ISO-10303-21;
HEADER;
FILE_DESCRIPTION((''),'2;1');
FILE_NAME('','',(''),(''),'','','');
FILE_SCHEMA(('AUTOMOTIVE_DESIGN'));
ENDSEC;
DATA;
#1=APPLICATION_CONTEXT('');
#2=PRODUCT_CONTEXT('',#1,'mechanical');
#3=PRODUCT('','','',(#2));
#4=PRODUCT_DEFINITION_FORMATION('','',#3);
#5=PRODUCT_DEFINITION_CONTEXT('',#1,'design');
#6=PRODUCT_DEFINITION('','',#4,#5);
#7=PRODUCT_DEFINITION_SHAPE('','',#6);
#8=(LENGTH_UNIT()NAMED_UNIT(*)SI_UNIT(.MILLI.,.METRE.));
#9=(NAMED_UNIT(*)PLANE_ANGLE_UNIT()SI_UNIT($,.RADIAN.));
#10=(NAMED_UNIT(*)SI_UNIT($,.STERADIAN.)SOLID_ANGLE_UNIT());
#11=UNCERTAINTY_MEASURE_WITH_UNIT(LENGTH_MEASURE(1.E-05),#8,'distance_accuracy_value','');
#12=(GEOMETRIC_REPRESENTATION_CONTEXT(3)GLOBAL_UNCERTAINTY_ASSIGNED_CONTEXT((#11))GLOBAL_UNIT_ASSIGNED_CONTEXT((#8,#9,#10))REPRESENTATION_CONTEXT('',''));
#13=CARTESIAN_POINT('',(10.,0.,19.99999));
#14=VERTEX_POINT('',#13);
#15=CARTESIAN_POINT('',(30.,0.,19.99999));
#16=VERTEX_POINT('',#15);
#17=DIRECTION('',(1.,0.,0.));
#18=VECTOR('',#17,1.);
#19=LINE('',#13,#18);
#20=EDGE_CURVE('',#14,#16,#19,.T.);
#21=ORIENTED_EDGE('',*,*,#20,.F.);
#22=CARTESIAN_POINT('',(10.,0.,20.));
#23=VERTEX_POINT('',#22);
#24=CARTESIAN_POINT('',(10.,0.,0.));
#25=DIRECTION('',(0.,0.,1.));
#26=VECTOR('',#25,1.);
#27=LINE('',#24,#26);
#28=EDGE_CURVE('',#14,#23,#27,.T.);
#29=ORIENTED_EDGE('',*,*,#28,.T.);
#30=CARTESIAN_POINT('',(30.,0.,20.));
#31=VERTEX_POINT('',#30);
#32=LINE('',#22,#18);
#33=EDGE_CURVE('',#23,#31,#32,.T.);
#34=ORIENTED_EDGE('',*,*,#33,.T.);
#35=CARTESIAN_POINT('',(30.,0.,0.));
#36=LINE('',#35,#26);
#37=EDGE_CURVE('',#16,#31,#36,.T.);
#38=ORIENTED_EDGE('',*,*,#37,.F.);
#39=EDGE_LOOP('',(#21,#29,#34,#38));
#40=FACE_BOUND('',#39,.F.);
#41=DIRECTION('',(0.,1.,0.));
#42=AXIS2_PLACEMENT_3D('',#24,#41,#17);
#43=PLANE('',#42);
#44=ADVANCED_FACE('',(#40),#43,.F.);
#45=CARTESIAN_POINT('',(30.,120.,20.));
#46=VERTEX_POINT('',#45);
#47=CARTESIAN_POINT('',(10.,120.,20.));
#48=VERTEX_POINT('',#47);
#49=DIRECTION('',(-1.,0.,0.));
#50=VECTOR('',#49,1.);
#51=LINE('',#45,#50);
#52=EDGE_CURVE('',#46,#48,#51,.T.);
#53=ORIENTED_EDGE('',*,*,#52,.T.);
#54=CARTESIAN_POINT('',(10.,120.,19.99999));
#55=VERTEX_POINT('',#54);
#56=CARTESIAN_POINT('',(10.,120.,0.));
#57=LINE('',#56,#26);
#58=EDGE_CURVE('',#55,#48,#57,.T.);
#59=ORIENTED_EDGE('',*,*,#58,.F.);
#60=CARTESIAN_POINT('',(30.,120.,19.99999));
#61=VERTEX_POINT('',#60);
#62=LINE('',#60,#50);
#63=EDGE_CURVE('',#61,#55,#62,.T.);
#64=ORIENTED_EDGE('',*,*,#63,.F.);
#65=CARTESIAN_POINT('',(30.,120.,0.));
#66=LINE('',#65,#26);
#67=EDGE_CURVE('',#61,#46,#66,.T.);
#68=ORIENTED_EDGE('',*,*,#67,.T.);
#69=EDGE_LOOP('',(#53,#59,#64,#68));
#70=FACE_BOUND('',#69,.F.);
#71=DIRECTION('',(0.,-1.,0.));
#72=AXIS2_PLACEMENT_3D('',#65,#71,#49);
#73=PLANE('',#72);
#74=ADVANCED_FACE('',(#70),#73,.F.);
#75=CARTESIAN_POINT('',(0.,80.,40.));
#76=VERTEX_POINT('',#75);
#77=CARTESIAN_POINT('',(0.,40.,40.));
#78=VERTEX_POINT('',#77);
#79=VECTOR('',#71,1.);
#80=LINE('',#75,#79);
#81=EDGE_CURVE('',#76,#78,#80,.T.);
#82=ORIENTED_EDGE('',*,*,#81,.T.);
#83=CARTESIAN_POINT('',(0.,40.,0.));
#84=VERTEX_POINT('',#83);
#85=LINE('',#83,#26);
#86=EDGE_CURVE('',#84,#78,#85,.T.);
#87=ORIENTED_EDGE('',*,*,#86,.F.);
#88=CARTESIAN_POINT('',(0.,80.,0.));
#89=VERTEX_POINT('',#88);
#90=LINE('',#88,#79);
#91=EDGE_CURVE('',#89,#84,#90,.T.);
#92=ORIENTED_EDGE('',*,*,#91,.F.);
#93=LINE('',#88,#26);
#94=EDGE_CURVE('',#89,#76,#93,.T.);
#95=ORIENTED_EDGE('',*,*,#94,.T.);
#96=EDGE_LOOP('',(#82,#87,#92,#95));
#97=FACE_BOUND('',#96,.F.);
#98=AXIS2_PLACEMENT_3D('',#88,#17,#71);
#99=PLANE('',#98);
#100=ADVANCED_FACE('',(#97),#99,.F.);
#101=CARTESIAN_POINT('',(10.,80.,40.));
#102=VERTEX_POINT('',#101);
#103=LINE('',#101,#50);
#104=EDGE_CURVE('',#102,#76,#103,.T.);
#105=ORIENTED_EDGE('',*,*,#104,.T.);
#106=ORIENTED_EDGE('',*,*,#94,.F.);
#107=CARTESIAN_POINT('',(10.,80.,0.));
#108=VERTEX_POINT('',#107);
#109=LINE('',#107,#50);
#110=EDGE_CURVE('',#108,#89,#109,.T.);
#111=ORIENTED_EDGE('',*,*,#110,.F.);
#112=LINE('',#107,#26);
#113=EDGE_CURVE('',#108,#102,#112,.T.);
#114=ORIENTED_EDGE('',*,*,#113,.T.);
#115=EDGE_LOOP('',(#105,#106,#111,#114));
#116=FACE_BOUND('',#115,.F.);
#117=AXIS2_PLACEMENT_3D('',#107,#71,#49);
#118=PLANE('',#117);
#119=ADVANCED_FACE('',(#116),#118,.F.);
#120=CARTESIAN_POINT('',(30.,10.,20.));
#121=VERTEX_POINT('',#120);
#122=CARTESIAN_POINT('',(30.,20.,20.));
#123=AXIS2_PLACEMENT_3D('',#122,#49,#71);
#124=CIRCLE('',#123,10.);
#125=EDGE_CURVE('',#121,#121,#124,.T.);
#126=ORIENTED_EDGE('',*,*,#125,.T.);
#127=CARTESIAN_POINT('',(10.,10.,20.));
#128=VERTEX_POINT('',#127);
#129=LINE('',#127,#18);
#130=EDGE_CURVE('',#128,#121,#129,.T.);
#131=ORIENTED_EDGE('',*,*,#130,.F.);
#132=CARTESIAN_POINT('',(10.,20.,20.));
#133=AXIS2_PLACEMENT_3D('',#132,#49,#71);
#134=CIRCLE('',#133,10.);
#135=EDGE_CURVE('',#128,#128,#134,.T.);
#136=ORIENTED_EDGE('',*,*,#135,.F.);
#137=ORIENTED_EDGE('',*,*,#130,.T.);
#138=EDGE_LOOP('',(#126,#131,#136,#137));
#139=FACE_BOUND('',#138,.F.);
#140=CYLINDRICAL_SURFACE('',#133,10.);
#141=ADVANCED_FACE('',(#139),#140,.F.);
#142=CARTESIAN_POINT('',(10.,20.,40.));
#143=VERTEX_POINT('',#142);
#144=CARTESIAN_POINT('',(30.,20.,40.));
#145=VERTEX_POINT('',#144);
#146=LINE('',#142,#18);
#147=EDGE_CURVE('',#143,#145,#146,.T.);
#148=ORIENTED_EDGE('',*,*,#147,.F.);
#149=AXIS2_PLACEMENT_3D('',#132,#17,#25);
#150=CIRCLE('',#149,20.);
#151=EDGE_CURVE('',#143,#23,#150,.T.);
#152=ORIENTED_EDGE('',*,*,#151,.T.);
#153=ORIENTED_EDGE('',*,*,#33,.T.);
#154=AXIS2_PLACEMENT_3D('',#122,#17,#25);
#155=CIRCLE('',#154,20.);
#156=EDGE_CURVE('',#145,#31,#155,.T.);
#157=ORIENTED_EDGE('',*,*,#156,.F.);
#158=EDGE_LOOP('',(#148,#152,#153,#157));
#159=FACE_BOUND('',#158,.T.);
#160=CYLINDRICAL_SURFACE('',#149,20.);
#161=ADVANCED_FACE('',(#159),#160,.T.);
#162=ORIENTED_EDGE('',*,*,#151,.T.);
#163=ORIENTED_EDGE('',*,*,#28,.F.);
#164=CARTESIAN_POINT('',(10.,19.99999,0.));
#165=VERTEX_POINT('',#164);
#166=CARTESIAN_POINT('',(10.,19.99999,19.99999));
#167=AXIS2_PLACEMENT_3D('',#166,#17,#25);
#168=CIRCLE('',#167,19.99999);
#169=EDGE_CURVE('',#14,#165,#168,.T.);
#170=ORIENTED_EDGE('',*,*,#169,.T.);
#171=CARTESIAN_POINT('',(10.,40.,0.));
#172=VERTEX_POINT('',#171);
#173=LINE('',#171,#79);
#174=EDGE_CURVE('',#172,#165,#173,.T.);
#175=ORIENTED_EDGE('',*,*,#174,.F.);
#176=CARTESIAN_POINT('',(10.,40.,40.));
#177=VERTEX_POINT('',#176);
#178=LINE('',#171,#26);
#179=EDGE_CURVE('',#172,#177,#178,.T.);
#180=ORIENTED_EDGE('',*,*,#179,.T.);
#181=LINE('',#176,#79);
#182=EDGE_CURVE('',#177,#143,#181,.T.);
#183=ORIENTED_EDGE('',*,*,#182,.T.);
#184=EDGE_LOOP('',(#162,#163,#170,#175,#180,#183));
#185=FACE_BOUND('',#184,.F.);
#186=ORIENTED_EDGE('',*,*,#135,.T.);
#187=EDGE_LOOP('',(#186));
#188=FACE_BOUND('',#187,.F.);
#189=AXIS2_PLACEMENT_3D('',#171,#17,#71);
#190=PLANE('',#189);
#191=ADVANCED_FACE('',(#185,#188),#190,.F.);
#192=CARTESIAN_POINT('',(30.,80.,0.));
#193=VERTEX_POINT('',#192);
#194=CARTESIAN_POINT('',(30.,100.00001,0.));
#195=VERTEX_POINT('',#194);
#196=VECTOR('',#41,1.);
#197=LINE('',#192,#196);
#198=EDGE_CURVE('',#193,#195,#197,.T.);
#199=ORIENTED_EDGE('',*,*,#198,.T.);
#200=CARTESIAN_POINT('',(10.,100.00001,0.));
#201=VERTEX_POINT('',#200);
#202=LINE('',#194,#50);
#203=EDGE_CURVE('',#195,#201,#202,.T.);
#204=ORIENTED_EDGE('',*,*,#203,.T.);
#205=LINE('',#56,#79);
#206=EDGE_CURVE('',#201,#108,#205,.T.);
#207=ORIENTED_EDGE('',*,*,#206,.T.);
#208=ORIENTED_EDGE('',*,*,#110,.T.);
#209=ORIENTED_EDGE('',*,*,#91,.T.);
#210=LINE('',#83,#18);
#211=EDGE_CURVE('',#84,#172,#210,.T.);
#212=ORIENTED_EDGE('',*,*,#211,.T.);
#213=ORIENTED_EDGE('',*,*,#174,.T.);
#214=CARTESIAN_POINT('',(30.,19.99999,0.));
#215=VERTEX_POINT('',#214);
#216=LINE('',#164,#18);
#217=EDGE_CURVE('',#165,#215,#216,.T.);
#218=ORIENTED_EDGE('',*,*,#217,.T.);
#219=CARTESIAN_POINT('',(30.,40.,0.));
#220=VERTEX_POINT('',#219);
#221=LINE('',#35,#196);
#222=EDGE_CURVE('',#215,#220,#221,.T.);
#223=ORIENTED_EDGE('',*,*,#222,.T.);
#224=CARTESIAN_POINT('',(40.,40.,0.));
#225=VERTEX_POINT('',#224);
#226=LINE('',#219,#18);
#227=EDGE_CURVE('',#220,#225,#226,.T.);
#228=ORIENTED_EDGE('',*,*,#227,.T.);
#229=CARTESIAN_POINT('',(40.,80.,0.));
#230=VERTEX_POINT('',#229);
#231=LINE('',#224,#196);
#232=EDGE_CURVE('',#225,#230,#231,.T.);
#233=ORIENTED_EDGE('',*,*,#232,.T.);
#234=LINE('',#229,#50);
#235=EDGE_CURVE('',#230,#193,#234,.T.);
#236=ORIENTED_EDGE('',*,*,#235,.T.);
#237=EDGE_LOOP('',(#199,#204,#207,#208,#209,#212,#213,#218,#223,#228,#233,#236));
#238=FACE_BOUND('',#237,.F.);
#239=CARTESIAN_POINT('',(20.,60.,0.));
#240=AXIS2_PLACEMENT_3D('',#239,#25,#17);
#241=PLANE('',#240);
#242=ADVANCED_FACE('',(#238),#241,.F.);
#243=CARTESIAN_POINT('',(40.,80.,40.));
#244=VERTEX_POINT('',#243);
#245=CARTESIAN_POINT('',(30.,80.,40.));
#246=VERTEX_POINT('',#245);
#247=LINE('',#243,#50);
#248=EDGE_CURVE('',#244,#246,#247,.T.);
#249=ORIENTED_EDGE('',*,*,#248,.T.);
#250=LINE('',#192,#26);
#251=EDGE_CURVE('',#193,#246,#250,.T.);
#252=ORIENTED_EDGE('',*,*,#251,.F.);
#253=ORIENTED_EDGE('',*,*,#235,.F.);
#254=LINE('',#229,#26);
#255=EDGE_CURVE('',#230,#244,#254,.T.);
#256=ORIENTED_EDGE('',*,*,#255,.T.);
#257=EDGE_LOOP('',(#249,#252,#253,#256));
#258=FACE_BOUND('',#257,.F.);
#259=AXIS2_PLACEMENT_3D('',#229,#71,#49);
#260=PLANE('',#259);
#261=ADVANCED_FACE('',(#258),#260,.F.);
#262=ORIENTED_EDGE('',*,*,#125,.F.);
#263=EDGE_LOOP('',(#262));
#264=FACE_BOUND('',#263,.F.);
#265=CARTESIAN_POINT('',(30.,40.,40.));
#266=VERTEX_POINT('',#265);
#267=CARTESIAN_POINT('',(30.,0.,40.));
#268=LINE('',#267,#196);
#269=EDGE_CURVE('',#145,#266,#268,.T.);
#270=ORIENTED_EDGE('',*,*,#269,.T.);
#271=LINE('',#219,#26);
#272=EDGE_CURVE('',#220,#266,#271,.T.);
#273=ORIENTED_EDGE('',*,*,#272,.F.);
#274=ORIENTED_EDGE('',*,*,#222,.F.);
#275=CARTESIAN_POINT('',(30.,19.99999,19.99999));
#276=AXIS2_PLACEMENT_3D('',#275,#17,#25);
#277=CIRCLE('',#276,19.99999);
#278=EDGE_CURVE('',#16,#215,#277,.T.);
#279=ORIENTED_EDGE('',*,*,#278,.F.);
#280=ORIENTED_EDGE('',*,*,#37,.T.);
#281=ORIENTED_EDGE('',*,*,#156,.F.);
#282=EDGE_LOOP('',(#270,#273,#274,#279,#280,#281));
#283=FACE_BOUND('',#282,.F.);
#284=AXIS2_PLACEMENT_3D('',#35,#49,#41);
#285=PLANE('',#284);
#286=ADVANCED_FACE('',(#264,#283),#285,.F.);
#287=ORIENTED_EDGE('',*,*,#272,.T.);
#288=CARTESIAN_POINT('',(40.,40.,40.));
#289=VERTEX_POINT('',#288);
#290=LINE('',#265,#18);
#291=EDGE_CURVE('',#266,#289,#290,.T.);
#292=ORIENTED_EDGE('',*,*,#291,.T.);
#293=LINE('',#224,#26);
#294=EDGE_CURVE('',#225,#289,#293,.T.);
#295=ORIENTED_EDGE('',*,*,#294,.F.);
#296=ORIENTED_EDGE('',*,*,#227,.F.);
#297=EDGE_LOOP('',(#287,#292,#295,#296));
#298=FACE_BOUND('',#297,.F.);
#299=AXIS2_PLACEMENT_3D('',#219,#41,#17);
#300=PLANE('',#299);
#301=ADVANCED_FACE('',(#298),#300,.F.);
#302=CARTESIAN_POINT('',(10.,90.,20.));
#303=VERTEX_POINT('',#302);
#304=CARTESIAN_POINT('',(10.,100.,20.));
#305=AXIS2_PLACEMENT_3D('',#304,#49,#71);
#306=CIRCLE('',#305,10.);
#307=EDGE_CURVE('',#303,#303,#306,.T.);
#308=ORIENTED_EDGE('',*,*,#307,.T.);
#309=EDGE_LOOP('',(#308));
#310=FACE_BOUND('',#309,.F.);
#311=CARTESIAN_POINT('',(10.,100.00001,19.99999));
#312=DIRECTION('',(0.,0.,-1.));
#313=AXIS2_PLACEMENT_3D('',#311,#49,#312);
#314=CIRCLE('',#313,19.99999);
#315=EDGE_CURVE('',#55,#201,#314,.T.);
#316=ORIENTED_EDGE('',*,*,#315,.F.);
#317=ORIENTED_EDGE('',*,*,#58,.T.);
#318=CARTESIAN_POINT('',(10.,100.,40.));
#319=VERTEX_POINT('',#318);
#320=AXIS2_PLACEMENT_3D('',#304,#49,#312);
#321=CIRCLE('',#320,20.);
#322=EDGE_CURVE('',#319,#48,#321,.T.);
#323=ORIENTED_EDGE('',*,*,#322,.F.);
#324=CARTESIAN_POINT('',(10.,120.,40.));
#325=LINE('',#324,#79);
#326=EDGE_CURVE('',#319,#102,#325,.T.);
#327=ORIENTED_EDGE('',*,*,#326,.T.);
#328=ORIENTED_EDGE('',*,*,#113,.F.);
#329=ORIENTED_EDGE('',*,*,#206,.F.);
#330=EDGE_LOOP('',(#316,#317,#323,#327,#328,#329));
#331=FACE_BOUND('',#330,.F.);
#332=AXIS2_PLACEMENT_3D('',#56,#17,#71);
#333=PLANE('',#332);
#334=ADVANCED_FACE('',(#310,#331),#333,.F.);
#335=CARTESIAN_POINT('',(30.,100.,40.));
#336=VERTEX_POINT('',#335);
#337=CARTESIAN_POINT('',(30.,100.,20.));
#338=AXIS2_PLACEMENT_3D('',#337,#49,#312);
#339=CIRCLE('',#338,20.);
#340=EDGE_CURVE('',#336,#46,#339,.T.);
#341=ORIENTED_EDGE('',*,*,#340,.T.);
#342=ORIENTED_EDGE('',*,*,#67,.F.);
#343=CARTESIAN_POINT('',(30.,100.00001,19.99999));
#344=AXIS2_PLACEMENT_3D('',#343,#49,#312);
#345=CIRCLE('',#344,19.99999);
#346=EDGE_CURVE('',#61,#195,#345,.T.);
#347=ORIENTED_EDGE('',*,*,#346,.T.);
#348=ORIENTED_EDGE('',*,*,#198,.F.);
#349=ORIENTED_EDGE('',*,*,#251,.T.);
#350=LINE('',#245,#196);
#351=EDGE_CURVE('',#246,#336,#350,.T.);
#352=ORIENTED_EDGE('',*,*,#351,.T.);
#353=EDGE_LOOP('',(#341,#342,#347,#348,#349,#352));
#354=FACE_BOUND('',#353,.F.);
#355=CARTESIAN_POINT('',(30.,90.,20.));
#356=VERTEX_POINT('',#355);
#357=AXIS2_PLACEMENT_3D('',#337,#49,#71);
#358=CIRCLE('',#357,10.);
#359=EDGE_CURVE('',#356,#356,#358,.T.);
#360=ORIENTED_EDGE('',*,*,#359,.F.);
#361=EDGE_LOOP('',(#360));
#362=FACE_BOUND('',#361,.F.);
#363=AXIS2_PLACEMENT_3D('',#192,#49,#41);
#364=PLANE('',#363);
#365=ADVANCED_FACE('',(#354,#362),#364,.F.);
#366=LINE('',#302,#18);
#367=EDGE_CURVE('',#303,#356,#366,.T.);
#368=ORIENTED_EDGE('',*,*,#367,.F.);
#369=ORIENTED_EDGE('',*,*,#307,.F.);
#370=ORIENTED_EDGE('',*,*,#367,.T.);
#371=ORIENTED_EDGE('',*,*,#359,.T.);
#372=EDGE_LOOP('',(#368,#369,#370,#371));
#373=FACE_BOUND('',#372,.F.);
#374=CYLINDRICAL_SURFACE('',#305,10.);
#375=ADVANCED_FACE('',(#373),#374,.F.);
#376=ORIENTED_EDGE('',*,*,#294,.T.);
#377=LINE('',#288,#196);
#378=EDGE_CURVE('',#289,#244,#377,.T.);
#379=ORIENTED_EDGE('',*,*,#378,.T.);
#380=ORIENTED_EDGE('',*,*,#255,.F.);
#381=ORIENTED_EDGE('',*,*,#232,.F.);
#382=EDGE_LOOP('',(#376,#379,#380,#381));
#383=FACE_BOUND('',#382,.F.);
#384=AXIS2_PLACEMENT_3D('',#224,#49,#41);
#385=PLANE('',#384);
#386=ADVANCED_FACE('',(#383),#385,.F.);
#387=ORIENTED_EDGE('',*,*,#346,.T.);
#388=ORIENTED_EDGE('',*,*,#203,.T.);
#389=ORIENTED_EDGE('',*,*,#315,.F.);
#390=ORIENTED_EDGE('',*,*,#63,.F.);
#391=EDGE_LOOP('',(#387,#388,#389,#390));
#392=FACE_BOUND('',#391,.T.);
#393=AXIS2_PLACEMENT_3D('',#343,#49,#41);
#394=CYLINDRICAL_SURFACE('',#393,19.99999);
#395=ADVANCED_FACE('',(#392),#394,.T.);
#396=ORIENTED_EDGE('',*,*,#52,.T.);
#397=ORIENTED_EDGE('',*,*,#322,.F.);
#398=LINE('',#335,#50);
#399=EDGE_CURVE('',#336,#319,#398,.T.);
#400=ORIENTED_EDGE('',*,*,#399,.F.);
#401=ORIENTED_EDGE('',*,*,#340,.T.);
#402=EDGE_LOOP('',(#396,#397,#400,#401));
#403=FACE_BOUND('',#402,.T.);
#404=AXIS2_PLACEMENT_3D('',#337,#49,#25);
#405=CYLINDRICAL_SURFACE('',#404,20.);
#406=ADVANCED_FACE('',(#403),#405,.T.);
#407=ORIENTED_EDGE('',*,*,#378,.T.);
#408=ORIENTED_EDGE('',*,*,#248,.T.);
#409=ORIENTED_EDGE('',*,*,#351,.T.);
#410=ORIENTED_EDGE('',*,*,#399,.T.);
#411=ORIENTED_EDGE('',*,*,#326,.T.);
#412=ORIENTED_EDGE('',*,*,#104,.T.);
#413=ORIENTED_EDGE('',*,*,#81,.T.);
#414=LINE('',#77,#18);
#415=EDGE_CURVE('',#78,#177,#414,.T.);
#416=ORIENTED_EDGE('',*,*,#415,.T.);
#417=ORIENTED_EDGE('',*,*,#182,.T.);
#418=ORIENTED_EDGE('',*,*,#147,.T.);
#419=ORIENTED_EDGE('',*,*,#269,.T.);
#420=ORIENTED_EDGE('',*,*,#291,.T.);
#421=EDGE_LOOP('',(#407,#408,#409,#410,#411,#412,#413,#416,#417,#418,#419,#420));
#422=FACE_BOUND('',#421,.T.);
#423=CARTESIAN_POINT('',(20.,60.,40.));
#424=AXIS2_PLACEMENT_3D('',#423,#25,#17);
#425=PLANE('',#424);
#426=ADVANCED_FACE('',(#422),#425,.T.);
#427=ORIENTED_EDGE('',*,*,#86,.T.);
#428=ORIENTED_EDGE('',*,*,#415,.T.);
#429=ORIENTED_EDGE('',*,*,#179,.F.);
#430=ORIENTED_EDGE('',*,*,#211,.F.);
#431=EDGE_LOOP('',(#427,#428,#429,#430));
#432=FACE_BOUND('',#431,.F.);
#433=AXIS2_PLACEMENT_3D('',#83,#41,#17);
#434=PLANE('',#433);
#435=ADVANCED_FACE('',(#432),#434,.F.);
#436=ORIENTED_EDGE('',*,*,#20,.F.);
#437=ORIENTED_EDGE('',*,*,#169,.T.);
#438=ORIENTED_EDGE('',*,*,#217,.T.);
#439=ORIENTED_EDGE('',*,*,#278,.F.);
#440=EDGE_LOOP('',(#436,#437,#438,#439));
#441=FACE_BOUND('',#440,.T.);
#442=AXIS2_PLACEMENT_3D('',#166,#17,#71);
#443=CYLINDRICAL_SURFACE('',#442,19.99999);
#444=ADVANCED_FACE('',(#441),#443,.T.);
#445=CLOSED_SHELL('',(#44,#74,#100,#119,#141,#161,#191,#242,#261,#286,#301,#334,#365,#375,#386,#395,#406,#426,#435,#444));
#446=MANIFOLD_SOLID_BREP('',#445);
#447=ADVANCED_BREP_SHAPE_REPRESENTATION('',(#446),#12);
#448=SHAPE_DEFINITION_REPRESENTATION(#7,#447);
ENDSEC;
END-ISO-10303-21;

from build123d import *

# Parameters (mm, degrees)
F1_DEPTH = 40
F2_R     = 10
F3_DEPTH = 20
F4_R     = 10
F5_DEPTH = 20
F6_R     = 20
F7_R     = 19.99999
F8_R     = 20
F9_R     = 19.99999


# Not quite as in the source:
# - a fillet or chamfer is up to 0.001 mm smaller than in the source, because OpenCascade refuses the exact size


with BuildPart() as f1:
    # F0 (on Top) → F1 (new body)
    with BuildSketch(Plane.XY):
        Polygon((10, 40), (10, 0), (30, 0), (30, 40), (40, 40), (40, 80), (30, 80), (30, 120), (10, 120), (10, 80), (0, 80), (0, 40), align=None)
    extrude(amount=F1_DEPTH)

    # F2 (on face) → F3 (cut)
    with BuildSketch(Plane(origin=(10, 0, 0), x_dir=(0, -1, 0), z_dir=(-1, 0, 0))):
        with Locations((-100, 20)):
            Circle(F2_R)
    extrude(amount=-F3_DEPTH, mode=Mode.SUBTRACT)

    # F4 (on face) → F5 (cut)
    with BuildSketch(Plane(origin=(10, 0, 0), x_dir=(0, -1, 0), z_dir=(-1, 0, 0))):
        with Locations((-20, 20)):
            Circle(F4_R)
    extrude(amount=-F5_DEPTH, mode=Mode.SUBTRACT)

    # F6
    f6_edges = [f1.edges().sort_by_distance(p)[0] for p in [
        (20, 0, 40),
    ]]
    fillet(f6_edges, radius=F6_R)

    # F7 (radius 20 in the source; OpenCascade refuses exactly that, so slightly less here)
    f7_edges = [f1.edges().sort_by_distance(p)[0] for p in [
        (20, 0, 0),
    ]]
    fillet(f7_edges, radius=F7_R)

    # F8
    f8_edges = [f1.edges().sort_by_distance(p)[0] for p in [
        (20, 120, 40),
    ]]
    fillet(f8_edges, radius=F8_R)

    # F9 (radius 20 in the source; OpenCascade refuses exactly that, so slightly less here)
    f9_edges = [f1.edges().sort_by_distance(p)[0] for p in [
        (20, 120, 0),
    ]]
    fillet(f9_edges, radius=F9_R)


solid = f1.part
